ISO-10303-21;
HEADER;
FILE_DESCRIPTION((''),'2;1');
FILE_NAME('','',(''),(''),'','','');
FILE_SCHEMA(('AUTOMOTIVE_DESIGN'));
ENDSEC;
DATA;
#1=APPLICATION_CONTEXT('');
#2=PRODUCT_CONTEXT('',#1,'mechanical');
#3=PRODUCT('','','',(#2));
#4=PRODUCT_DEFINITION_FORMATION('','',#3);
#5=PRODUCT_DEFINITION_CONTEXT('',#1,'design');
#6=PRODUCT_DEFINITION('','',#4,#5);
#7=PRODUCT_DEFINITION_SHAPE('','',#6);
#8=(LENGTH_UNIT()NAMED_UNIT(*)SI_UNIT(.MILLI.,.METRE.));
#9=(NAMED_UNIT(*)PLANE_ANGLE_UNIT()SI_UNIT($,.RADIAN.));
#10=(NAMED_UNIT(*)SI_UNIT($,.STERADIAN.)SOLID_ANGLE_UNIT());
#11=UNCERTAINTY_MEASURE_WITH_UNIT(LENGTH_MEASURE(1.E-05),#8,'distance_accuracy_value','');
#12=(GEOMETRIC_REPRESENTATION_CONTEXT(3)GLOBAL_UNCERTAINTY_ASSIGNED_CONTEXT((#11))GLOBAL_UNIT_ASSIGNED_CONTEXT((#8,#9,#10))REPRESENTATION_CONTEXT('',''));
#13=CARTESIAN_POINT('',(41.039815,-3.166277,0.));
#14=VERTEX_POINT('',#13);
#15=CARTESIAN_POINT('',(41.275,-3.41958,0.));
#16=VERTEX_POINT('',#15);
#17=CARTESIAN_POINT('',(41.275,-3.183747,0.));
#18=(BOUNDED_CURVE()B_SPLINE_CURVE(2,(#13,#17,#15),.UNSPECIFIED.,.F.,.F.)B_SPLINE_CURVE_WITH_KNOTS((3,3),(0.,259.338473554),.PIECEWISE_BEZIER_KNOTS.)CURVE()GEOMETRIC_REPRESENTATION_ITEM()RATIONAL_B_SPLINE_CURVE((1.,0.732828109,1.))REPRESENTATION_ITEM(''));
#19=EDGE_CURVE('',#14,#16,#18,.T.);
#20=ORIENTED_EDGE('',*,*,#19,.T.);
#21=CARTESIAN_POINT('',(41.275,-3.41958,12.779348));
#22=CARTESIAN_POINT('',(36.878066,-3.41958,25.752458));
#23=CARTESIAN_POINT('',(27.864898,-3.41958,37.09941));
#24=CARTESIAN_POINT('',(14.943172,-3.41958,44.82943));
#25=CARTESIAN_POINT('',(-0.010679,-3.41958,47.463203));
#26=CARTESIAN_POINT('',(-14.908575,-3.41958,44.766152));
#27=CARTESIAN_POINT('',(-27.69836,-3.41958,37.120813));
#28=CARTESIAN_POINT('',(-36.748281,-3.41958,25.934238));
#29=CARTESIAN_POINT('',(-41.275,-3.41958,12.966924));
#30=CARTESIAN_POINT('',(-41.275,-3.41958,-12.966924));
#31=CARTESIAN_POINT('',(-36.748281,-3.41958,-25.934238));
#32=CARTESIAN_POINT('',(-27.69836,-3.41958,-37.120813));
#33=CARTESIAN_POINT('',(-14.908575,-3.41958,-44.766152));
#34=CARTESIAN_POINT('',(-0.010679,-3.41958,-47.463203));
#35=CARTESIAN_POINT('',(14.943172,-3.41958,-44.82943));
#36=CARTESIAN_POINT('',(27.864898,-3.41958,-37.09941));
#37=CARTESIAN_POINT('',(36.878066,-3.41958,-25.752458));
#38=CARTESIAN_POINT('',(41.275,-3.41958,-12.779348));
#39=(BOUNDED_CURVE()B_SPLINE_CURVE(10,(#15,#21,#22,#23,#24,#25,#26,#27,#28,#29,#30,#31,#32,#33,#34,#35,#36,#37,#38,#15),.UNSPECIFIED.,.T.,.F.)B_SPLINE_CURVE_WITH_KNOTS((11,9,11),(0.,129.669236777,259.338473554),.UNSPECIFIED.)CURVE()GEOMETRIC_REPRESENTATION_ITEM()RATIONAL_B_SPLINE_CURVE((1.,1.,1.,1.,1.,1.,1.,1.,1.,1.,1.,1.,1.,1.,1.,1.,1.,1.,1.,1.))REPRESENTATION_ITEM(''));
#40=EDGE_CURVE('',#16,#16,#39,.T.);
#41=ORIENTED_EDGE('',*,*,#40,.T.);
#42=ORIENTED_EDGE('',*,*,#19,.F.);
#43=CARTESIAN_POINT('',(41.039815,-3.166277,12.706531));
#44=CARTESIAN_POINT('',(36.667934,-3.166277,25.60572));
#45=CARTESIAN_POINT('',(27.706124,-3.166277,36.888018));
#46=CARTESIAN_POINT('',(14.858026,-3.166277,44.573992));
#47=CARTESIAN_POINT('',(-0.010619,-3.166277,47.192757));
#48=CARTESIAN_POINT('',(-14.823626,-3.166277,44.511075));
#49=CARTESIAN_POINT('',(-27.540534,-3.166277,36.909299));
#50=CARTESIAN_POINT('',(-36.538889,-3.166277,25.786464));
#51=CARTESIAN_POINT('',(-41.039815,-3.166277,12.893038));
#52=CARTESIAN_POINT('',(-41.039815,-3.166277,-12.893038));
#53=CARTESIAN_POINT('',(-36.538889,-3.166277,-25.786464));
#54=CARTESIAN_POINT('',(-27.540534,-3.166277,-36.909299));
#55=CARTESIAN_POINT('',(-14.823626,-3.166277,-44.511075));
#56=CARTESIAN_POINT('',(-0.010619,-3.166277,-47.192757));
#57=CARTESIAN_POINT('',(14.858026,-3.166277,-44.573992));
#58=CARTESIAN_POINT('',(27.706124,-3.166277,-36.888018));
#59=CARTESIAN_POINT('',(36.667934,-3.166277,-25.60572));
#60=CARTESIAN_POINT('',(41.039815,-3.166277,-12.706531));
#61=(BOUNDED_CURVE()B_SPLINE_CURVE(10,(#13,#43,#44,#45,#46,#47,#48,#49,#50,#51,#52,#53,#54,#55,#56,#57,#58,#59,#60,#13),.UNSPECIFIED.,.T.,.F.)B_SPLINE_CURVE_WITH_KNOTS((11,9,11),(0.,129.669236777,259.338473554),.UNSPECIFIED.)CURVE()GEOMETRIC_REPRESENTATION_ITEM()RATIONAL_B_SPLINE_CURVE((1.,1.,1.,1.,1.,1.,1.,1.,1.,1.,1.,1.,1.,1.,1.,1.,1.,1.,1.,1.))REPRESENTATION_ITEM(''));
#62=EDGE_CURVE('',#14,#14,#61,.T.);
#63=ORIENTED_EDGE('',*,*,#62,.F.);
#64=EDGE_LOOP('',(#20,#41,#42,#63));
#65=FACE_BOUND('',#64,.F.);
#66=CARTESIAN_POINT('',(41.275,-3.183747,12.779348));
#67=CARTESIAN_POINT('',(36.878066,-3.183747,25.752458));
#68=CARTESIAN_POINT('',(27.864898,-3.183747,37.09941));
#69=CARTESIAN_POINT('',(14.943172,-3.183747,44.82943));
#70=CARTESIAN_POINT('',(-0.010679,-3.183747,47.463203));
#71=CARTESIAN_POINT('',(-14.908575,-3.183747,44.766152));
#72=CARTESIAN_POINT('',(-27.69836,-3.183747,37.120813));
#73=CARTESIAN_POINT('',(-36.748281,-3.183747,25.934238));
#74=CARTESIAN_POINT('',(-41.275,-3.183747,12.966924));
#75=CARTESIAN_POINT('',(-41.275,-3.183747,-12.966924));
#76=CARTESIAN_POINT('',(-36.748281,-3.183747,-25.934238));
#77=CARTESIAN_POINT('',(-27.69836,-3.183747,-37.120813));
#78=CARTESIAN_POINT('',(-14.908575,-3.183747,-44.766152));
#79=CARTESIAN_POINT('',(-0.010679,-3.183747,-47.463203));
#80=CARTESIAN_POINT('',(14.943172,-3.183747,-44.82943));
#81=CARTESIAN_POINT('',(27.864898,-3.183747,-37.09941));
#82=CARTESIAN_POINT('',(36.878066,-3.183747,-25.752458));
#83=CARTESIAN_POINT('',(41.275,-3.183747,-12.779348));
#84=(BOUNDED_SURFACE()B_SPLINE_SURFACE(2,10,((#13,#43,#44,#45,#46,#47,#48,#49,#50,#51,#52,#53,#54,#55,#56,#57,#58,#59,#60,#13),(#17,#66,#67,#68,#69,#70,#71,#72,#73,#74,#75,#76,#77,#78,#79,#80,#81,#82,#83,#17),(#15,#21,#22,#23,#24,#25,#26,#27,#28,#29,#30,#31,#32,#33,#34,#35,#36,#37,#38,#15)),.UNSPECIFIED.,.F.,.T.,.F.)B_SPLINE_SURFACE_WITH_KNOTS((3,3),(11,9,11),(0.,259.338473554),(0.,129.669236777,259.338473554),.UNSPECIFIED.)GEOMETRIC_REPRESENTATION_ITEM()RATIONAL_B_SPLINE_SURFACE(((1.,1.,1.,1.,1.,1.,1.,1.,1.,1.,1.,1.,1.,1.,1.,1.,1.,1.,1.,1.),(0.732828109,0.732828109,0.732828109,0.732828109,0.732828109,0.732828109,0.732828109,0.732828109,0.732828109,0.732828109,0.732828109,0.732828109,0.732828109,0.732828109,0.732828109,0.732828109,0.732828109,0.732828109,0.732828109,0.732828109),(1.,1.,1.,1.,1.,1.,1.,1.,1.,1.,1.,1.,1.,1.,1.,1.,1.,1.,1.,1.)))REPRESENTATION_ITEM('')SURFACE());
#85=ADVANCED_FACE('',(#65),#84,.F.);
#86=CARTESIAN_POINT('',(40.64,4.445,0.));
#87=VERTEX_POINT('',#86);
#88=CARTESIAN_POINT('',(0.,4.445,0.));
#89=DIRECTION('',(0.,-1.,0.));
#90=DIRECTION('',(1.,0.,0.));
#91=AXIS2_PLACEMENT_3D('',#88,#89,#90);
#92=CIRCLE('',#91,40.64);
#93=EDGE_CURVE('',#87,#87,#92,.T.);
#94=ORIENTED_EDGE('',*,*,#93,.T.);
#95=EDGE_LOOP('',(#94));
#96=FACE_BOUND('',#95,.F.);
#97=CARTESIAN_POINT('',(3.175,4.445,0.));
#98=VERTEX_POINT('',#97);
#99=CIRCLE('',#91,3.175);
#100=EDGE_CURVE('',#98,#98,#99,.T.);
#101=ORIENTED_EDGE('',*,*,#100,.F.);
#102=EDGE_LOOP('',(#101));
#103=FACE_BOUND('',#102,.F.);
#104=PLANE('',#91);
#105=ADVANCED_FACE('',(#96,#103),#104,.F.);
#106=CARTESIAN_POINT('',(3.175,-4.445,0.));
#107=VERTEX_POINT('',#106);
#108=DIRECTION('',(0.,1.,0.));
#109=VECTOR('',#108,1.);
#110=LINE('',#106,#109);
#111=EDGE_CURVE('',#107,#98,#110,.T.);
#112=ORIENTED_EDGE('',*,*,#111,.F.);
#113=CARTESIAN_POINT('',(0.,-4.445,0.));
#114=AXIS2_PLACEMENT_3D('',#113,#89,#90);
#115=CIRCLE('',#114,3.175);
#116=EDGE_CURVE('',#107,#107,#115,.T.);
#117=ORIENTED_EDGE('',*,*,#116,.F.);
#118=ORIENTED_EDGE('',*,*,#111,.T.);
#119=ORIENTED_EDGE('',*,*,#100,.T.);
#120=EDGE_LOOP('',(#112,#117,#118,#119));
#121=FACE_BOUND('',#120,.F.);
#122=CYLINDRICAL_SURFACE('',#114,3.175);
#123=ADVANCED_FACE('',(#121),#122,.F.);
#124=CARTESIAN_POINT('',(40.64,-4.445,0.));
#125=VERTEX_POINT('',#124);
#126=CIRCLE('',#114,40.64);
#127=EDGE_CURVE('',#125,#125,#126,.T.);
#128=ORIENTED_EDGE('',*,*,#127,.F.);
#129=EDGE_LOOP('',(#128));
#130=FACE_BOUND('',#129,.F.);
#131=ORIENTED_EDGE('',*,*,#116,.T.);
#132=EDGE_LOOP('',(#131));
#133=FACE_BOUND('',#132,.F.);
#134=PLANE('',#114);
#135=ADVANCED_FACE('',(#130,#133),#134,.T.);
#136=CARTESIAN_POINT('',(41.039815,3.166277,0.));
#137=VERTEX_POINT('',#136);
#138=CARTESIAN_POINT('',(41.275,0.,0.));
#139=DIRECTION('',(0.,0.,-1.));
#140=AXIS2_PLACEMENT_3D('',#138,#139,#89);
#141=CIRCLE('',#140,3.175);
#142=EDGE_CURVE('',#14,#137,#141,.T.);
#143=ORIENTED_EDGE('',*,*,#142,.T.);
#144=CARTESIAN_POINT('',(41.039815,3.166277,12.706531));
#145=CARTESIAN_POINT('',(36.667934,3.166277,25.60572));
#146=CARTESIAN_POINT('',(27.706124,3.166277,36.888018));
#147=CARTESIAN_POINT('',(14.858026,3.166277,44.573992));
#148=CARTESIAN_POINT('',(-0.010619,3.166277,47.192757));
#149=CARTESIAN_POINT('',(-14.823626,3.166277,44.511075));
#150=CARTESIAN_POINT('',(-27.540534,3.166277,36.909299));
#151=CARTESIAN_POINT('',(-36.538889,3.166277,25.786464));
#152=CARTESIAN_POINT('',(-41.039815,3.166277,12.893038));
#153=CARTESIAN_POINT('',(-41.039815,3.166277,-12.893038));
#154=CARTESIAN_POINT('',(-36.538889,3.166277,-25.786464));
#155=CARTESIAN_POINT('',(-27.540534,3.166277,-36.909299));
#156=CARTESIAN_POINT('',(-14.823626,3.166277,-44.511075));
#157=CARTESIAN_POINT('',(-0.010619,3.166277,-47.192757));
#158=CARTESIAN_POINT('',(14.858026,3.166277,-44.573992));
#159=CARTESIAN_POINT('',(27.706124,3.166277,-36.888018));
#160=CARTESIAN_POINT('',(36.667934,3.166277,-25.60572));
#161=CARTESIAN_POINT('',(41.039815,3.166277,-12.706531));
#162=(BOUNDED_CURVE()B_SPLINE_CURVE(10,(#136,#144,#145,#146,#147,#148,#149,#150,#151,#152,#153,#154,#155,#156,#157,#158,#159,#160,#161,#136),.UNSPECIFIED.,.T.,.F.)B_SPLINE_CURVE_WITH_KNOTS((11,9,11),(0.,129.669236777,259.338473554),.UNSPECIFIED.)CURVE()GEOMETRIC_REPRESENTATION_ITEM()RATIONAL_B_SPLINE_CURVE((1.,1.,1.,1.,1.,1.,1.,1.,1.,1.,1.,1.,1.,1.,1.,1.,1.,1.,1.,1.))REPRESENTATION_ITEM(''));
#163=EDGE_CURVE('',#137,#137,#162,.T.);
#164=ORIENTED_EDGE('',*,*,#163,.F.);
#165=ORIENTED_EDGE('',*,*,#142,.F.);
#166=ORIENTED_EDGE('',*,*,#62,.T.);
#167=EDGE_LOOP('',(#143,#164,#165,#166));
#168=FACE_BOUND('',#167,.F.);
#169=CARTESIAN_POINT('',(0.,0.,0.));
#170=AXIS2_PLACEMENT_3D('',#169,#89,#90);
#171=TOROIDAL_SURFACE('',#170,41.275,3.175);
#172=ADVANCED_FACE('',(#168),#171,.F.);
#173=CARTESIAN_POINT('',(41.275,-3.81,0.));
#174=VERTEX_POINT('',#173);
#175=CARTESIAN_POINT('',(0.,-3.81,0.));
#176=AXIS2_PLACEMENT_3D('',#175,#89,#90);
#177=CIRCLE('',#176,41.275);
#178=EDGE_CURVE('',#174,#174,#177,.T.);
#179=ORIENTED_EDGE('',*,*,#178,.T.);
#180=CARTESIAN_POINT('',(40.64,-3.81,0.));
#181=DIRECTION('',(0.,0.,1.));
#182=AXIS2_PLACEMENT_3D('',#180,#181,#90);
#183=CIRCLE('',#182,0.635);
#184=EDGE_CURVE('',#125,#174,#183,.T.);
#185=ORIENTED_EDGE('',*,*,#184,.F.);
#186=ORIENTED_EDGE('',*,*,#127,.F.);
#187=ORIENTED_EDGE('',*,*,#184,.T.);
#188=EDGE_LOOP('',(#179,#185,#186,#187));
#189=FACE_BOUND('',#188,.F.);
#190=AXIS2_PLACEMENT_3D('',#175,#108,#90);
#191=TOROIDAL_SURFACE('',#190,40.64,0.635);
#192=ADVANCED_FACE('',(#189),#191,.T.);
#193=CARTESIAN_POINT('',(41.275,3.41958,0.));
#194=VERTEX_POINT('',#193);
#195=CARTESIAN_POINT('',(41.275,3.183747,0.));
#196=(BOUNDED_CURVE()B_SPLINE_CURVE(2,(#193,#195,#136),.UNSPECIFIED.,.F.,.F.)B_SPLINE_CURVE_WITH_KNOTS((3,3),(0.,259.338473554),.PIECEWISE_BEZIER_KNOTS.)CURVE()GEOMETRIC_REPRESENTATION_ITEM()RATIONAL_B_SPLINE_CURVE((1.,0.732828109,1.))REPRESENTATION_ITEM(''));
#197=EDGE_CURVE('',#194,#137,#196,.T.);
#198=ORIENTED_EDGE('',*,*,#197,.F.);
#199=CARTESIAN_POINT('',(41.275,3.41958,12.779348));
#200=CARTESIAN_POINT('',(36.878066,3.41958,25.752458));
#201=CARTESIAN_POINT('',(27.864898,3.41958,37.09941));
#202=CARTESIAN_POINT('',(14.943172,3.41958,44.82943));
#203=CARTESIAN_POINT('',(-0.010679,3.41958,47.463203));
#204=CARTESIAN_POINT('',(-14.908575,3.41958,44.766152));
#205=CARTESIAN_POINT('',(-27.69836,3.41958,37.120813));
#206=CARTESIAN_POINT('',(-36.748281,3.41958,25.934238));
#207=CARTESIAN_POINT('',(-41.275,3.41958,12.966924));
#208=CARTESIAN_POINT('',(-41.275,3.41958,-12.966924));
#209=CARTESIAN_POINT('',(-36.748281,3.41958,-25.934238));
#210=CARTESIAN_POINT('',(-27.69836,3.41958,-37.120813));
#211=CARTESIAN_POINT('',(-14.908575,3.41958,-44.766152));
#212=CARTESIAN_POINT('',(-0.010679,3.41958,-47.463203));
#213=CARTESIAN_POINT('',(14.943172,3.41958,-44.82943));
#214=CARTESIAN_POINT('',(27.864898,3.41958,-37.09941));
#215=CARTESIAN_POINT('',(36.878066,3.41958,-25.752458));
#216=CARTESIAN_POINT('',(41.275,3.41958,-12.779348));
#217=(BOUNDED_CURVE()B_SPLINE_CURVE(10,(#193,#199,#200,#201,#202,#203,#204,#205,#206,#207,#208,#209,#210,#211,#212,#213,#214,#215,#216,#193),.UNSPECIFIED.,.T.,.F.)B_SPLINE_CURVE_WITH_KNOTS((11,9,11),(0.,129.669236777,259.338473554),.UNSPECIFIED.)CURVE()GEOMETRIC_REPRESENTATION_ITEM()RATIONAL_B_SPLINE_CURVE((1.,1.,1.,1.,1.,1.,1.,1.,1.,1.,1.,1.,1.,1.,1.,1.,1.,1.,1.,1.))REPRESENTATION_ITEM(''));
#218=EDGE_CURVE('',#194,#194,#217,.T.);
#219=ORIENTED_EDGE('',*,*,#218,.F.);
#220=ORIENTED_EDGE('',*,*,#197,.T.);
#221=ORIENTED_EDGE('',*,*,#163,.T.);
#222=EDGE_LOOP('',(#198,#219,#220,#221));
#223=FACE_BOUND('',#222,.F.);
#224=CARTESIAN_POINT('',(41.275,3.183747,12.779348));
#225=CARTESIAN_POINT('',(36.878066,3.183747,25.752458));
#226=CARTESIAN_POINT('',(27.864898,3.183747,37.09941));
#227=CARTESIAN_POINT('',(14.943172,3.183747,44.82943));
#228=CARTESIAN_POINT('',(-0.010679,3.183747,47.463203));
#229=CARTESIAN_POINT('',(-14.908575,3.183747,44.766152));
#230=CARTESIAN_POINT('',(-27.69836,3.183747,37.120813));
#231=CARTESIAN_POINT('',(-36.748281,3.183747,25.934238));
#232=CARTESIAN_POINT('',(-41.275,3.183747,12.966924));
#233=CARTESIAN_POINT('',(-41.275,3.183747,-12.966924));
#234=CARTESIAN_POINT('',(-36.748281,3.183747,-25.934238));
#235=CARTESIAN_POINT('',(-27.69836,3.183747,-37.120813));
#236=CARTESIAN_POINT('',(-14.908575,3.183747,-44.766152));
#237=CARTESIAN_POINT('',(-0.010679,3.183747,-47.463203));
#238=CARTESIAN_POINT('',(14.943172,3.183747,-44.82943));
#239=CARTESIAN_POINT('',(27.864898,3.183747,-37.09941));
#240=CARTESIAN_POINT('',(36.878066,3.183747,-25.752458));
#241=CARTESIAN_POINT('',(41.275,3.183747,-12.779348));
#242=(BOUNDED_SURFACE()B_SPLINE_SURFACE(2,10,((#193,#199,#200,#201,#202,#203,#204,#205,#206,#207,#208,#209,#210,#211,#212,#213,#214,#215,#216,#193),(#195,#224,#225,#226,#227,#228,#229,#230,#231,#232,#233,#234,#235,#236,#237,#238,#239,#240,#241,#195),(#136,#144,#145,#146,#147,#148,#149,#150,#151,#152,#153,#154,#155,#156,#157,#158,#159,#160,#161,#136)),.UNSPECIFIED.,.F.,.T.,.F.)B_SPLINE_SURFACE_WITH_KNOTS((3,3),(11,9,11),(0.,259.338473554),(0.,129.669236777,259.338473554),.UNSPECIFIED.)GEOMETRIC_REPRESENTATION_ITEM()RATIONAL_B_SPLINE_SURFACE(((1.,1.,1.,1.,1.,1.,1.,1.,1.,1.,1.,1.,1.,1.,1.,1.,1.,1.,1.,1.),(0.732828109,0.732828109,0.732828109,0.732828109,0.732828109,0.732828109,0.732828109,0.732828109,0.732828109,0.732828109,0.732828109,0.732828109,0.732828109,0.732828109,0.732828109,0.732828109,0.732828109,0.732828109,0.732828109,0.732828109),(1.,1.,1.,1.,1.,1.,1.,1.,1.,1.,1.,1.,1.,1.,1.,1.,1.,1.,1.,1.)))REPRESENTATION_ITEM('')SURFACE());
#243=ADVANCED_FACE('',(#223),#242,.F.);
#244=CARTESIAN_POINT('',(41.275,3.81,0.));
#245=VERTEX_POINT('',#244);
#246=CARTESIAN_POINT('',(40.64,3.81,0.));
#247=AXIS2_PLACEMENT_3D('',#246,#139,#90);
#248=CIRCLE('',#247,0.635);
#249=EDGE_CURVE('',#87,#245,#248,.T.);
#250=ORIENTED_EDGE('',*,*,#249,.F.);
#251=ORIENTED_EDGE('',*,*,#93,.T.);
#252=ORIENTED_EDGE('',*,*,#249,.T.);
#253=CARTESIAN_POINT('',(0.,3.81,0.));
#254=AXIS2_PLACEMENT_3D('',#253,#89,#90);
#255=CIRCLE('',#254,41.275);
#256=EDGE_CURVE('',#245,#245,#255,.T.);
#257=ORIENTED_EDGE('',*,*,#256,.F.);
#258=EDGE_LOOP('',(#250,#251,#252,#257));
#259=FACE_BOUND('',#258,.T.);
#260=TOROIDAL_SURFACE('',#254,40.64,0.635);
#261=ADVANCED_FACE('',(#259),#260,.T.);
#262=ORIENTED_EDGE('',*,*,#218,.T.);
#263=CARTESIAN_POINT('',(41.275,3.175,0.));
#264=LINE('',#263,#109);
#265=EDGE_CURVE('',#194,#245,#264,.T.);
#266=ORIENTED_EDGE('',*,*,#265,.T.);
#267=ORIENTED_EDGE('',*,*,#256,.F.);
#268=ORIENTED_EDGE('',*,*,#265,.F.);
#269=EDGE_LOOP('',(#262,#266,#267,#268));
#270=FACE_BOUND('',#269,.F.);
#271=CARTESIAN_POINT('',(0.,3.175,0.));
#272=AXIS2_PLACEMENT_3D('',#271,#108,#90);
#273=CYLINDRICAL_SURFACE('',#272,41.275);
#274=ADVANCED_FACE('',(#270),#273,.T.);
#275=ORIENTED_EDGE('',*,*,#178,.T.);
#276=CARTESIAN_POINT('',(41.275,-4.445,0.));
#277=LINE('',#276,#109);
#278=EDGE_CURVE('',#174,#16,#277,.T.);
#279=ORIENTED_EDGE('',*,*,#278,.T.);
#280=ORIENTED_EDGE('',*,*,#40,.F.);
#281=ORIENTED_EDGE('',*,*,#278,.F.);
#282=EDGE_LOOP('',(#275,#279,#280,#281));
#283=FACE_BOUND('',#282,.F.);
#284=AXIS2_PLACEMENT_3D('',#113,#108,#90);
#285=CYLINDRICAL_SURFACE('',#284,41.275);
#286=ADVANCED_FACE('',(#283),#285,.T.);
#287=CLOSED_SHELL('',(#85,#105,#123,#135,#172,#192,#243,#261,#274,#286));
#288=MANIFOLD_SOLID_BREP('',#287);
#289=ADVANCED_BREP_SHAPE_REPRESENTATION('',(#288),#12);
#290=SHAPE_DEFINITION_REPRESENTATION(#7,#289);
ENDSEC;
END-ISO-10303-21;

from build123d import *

# Parameters (mm, degrees)
F2_R     = 0.635
F3_R     = 0.254
F4_R     = 3.175
F5_DEPTH = 8.891


with BuildPart() as f1:
    # F0 (on Top) → F1 (revolve)
    with BuildSketch(Plane.XY):
        with BuildLine():
            Line((41.275, 4.445), (0, 4.445))
            Line((0, 4.445), (0, -4.445))
            Line((0, -4.445), (41.275, -4.445))
            Line((41.275, -4.445), (41.275, -3.175))
            ThreePointArc((41.275, -3.175), (38.1, 0), (41.275, 3.175))
            Line((41.275, 3.175), (41.275, 4.445))
        make_face()
    revolve(axis=Axis((0, 0, 0), (0, -1, 0)))

    # F2
    f2_edges = [f1.edges().sort_by_distance(p)[0] for p in [
        (-41.275, 4.445, 0),
        (-41.275, -4.445, 0),
    ]]
    fillet(f2_edges, radius=F2_R)

    # F3
    f3_edges = [f1.edges().sort_by_distance(p)[0] for p in [
        (-41.275, 3.175, 0),
        (-41.275, -3.175, 0),
    ]]
    fillet(f3_edges, radius=F3_R)

    # F4 (on face) → F5 (cut, through all)
    with BuildSketch(Plane.XZ.offset(4.445)):
        Circle(F4_R)
    extrude(amount=-F5_DEPTH, mode=Mode.SUBTRACT)


solid = f1.part
